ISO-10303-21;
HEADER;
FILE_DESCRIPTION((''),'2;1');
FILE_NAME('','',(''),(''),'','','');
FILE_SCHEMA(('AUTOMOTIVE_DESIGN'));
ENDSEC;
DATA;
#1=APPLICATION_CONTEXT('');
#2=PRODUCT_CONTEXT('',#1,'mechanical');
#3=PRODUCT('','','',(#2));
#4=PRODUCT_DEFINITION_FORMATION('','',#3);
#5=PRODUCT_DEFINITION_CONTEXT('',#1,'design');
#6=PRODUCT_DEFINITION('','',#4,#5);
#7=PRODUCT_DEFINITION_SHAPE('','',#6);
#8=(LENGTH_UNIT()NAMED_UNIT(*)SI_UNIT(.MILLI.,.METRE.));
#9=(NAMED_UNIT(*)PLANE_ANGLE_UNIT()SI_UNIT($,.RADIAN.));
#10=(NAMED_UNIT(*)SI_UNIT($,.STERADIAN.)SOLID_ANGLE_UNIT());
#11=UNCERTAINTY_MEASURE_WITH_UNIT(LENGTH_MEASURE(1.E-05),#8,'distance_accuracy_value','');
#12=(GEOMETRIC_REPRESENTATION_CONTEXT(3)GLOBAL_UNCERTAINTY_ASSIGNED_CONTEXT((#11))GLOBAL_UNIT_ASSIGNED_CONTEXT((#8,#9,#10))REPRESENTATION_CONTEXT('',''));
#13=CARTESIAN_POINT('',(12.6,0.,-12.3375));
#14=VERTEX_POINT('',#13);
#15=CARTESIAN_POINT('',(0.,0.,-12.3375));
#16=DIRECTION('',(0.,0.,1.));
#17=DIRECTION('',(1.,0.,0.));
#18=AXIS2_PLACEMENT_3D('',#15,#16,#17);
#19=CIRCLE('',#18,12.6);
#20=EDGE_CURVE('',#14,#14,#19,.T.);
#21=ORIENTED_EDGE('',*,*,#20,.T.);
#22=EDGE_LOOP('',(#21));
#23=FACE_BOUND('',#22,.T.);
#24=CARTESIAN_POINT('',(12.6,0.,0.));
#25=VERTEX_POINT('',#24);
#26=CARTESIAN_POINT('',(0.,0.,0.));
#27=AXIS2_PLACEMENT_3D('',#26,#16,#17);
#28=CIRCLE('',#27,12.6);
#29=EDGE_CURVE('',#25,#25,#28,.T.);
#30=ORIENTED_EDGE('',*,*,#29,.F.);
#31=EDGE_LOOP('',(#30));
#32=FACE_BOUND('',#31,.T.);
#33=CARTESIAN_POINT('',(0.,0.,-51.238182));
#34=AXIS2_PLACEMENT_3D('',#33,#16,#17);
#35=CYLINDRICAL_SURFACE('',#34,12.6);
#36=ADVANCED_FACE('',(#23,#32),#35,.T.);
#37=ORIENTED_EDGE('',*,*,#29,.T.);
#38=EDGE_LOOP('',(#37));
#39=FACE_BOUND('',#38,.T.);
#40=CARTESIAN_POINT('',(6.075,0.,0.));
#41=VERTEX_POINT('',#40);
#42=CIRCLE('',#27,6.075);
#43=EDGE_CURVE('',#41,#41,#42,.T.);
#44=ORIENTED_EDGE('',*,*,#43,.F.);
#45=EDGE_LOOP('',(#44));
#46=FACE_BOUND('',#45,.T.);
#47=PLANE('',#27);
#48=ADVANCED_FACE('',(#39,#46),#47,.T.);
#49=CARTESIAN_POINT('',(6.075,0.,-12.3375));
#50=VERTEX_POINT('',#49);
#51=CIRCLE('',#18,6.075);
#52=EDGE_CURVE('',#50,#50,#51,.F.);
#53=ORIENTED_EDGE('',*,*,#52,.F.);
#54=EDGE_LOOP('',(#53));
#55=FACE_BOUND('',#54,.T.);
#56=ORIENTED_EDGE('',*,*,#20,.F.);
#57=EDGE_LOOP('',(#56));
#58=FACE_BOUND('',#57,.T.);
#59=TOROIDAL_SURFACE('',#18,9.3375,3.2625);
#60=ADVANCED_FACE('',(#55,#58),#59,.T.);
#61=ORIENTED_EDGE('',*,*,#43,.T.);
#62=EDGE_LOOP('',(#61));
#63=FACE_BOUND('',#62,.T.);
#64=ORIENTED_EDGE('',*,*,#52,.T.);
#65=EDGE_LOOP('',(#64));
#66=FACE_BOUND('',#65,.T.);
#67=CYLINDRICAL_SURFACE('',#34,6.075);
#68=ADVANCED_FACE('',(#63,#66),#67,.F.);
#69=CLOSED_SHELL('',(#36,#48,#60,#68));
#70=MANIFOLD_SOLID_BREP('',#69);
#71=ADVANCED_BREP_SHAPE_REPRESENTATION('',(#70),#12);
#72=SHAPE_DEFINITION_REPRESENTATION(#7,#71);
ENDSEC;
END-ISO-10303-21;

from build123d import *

# Parameters (mm, degrees)
CROQUIS2_R              = 12.6
CROQUIS2_R_2            = 6.075
SALIENTE_EXTRUIR1_DEPTH = 15.6
REDONDEO1_R             = 3.2625


with BuildPart() as part:
    # Croquis2 → Saliente-Extruir1 (new body)
    with BuildSketch(Plane.XY):
        Circle(CROQUIS2_R)
        Circle(CROQUIS2_R_2, mode=Mode.SUBTRACT)
    extrude(amount=-SALIENTE_EXTRUIR1_DEPTH)

    # Redondeo1
    redondeo1_edges = [part.edges().sort_by_distance(p)[0] for p in [
        (-6.075, 0, -15.6),
        (-12.6, 0, -15.6),
    ]]
    fillet(redondeo1_edges, radius=REDONDEO1_R - 0.0001)  # a hair under: the kernel refuses the full size


solid = part.part
